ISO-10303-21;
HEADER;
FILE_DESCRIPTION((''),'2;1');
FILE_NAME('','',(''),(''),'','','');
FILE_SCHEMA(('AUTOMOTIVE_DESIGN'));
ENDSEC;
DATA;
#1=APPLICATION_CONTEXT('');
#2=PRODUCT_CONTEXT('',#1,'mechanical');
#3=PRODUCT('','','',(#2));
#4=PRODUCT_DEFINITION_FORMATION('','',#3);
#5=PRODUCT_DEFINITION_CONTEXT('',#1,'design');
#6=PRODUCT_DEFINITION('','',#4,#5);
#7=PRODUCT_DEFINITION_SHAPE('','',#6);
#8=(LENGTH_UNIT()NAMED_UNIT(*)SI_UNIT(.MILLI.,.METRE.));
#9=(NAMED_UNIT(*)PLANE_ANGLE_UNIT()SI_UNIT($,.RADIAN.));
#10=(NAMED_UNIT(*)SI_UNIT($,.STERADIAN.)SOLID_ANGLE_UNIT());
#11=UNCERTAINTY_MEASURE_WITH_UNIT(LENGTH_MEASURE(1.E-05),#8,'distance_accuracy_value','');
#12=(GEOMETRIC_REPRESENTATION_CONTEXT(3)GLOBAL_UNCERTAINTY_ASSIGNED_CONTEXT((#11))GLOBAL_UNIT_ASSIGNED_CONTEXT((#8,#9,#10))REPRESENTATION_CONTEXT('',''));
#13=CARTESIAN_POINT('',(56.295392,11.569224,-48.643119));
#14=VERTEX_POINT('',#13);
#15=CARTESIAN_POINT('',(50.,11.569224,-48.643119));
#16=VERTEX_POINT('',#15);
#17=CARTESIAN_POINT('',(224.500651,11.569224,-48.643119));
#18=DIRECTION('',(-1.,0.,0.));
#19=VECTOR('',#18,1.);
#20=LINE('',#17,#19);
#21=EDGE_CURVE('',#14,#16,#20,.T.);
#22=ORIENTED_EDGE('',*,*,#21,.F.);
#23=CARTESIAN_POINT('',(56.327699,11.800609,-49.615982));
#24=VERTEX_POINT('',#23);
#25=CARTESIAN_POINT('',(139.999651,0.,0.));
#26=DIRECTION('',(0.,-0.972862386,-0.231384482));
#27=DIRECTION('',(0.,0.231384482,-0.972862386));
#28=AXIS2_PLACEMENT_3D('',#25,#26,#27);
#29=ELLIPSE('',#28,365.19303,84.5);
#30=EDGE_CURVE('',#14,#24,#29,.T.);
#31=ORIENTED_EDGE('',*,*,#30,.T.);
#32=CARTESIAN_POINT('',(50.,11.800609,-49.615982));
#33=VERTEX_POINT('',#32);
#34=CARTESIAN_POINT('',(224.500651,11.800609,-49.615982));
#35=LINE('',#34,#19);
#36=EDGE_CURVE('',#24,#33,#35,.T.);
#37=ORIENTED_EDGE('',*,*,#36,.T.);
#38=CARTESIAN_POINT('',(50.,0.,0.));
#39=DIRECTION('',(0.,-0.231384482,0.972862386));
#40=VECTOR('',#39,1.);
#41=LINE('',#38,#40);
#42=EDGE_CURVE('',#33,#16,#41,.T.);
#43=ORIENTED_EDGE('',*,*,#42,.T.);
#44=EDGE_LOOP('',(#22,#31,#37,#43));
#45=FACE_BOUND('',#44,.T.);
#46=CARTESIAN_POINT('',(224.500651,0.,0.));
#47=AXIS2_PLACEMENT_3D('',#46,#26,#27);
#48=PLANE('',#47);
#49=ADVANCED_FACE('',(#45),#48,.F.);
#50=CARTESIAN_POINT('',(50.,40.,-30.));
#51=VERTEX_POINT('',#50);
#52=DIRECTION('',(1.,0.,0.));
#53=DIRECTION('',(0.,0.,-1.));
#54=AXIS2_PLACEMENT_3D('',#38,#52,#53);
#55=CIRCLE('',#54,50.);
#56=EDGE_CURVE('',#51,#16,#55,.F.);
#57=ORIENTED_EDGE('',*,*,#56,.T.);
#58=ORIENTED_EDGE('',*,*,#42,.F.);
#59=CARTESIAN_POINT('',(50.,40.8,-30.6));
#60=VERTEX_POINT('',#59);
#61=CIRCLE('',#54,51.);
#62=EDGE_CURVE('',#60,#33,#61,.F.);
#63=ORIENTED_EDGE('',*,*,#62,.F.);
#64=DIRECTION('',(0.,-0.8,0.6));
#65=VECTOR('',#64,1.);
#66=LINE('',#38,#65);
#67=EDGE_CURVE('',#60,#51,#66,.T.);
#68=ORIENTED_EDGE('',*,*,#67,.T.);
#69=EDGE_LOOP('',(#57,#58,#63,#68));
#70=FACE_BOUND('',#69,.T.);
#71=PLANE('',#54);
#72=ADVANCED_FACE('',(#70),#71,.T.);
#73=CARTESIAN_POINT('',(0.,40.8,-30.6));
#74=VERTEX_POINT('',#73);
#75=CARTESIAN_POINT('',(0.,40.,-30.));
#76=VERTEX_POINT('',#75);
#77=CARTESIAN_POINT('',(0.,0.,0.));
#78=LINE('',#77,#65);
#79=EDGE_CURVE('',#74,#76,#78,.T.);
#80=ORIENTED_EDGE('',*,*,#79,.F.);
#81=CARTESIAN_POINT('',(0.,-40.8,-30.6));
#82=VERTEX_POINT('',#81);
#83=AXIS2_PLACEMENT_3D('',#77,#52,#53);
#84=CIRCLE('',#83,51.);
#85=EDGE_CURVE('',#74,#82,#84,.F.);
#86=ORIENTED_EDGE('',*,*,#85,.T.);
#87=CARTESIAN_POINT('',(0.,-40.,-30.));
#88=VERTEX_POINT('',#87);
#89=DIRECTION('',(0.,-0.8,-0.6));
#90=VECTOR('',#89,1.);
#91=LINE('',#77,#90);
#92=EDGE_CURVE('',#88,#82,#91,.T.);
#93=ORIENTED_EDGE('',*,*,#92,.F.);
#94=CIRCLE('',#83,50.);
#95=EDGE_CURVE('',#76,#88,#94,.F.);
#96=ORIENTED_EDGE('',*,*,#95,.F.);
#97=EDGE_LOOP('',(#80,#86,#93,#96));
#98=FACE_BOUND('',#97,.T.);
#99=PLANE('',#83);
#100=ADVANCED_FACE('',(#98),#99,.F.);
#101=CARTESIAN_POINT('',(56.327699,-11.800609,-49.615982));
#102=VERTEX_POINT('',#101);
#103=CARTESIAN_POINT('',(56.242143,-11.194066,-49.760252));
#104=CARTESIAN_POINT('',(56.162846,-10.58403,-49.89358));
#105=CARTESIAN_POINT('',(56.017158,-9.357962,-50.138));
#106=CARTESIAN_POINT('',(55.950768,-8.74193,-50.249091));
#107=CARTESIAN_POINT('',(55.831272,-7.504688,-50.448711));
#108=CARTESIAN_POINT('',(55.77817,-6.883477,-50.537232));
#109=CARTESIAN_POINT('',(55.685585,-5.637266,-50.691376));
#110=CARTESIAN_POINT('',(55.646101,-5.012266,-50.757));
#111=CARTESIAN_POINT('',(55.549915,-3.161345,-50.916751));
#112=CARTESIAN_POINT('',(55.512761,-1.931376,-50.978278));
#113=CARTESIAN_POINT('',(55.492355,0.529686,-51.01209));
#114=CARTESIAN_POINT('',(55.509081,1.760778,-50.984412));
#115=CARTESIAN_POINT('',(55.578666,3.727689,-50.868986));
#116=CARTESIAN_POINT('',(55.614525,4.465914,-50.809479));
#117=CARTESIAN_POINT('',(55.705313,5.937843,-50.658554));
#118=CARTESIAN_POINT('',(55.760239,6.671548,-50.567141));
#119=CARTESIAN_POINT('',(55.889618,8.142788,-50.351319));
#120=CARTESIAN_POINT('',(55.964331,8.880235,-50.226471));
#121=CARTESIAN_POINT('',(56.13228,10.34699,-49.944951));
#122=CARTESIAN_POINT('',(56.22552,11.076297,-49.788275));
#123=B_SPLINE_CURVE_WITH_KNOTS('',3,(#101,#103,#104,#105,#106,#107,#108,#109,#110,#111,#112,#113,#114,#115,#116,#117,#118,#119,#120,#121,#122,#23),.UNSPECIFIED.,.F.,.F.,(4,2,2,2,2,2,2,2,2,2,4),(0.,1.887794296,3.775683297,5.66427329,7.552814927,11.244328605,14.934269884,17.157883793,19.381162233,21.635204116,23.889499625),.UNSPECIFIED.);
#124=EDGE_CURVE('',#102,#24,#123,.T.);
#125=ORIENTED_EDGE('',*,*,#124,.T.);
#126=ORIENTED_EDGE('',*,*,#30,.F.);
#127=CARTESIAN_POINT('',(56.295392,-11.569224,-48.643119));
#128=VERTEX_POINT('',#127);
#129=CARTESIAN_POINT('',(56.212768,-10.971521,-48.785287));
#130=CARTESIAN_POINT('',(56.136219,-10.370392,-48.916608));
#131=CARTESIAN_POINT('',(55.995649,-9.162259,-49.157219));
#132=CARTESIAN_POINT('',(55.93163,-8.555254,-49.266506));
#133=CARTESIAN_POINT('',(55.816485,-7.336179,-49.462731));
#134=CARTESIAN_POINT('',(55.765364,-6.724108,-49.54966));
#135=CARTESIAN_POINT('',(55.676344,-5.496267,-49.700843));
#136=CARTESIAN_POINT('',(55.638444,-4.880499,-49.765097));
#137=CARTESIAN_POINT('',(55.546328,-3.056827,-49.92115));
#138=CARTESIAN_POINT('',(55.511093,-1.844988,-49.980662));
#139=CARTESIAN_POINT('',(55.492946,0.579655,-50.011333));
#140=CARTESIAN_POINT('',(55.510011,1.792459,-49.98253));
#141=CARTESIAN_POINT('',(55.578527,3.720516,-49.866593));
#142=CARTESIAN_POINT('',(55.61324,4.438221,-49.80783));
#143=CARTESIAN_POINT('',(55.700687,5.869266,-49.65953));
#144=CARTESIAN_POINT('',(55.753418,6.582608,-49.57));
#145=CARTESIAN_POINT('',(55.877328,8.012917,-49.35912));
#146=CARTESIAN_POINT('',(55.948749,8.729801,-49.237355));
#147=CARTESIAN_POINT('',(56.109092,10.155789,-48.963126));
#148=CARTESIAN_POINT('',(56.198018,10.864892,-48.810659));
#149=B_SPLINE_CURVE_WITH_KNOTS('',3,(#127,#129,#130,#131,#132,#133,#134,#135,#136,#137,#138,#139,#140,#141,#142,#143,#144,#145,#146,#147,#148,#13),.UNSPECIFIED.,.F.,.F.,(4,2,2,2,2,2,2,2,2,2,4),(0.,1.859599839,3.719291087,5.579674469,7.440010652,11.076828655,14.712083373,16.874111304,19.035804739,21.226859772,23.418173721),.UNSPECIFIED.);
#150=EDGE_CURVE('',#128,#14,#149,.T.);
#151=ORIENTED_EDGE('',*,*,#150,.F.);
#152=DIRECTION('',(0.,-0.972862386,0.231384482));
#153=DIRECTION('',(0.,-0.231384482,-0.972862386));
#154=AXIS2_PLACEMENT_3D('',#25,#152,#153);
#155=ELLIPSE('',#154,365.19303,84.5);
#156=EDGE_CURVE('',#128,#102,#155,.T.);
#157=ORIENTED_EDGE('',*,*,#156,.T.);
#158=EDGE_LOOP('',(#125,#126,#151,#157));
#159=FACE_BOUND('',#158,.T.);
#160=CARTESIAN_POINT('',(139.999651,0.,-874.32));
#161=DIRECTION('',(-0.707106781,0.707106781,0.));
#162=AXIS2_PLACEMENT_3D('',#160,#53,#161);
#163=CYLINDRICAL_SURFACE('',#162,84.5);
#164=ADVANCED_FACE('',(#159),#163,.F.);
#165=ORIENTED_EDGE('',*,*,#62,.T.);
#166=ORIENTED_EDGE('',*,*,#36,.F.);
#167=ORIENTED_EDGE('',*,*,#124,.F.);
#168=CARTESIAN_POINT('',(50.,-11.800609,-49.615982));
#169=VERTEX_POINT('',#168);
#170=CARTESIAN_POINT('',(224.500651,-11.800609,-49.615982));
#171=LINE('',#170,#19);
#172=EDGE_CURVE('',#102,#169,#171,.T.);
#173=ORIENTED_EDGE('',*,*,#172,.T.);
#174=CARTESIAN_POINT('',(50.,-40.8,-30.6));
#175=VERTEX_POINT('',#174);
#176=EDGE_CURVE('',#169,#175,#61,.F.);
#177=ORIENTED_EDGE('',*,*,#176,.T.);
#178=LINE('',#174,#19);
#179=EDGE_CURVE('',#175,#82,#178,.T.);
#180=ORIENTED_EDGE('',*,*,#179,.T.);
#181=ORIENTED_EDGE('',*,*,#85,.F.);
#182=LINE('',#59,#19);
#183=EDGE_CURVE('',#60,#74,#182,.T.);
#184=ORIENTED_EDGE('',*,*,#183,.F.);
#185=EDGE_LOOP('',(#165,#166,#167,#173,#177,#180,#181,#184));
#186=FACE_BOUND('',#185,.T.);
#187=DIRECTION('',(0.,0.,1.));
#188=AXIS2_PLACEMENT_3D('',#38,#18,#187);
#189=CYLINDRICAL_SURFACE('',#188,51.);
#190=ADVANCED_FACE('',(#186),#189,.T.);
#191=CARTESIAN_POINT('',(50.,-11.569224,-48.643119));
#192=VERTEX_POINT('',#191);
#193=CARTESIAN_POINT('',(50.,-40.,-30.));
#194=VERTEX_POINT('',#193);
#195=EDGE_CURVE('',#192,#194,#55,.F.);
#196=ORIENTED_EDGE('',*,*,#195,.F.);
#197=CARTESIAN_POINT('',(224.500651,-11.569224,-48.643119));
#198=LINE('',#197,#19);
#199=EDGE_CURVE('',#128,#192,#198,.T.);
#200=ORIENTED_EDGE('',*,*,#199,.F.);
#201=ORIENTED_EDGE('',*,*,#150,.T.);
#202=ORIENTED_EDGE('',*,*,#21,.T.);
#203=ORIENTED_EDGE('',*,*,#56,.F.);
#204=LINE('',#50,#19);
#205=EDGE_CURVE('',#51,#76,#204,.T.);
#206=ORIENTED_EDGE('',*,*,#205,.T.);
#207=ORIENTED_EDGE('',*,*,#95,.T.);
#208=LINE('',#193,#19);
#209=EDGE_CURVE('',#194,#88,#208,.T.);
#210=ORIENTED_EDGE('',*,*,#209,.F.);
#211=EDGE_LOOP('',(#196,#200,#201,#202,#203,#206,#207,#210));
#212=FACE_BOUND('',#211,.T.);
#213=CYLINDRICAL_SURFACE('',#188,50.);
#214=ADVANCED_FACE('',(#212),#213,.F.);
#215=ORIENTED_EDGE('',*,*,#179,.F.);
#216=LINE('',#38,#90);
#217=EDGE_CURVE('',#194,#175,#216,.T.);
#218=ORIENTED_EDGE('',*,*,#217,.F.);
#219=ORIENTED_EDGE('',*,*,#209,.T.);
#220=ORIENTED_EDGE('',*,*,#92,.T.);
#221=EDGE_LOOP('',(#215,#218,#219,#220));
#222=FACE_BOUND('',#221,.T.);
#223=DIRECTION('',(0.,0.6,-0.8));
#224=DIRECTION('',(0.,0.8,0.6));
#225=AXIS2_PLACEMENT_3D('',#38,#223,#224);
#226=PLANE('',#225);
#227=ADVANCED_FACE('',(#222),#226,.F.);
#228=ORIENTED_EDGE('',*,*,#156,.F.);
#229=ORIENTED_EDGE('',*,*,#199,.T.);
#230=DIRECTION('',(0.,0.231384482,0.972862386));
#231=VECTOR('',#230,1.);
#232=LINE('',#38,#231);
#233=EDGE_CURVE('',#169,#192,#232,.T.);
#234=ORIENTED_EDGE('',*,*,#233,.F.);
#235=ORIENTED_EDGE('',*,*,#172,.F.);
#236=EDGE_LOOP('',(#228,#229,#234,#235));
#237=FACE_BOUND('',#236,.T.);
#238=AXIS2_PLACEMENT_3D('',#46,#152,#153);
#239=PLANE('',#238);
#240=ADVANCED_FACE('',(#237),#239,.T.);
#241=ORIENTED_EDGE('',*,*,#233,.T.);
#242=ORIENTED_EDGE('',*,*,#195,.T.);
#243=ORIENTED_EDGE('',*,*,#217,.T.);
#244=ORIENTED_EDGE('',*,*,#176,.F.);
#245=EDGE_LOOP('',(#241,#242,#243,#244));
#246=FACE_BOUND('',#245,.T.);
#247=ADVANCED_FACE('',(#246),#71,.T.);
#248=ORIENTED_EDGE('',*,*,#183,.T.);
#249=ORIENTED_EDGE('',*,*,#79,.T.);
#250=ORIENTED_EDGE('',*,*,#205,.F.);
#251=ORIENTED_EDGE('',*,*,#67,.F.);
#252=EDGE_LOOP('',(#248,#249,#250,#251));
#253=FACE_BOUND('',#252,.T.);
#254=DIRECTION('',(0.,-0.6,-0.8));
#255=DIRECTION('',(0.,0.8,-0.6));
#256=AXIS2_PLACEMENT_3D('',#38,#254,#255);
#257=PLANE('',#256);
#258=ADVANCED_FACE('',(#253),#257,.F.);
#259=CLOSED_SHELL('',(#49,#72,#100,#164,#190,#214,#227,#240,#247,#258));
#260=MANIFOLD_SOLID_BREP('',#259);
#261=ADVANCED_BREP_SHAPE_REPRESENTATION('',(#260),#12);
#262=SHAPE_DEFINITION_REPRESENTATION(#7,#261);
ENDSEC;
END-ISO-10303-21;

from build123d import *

# Parameters (mm, degrees)
BOSS_EXTRUDE1_DEPTH   = 50
BOSS_EXTRUDE1_2_DEPTH = 50
BOSS_EXTRUDE2_DEPTH   = 55.499654918
BOSS_EXTRUDE2_START   = 55.499654918
BOSS_EXTRUDE2_2_DEPTH = 0.828043858
BOSS_EXTRUDE2_START_2 = -52
BOSS_EXTRUDE2_3_DEPTH = 4


with BuildPart() as part:
    # airflap → Boss-Extrude1 (new body)
    with BuildSketch(Plane(origin=(0, 0, 0), x_dir=(0, 0, -1), z_dir=(1, 0, 0))):
        with BuildLine():
            ThreePointArc((49.615981669, 11.800608587), (42.648471302, 27.966192012), (30.6, 40.8))
            Line((30.6, 40.8), (30, 40))
            ThreePointArc((30, 40), (41.812226766, 27.417835306), (48.643119283, 11.569224105))
            Line((48.643119283, 11.569224105), (49.615981669, 11.800608587))
        make_face()
    extrude(amount=BOSS_EXTRUDE1_DEPTH)



with BuildPart() as body_2:
    # airflap → Boss-Extrude1 2 (new body)
    with BuildSketch(Plane(origin=(0, 0, 0), x_dir=(0, 0, -1), z_dir=(1, 0, 0))):
        with BuildLine():
            ThreePointArc((30.6, -40.8), (42.648471302, -27.966192012), (49.615981669, -11.800608587))
            Line((49.615981669, -11.800608587), (48.643119283, -11.569224105))
            ThreePointArc((48.643119283, -11.569224105), (41.812226766, -27.417835306), (30, -40))
            Line((30, -40), (30.6, -40.8))
        make_face()
    extrude(amount=BOSS_EXTRUDE1_2_DEPTH)


with BuildPart() as part_1:
    add(part.part)

    add(body_2.part)  # Boss-Extrude2 merges body 2
    # Boss-Extrude2: read off the stored shape, not the designer's step
    # Boss-Extrude2 outline → Boss-Extrude2 (add)
    with BuildSketch(Plane(origin=(0, 0, 0), x_dir=(0, 0, -1), z_dir=(1, 0, 0))):
        with BuildLine():
            ThreePointArc((49.615981669, -11.800608587), (51, 0), (49.615981669, 11.800608587))
            Line((49.615981669, 11.800608587), (48.643119283, 11.569224105))
            ThreePointArc((48.643119283, 11.569224105), (50, 0), (48.643119283, -11.569224105))
            Line((48.643119283, -11.569224105), (49.615981669, -11.800608587))
        make_face()
    extrude(amount=BOSS_EXTRUDE2_DEPTH)

    # Boss-Extrude2 2 outline → Boss-Extrude2 2 (add)
    with BuildSketch(Plane.YZ.offset(BOSS_EXTRUDE2_START)):
        with BuildLine():
            Line((11.800608587, -49.615981669), (11.569224105, -48.643119283))
            ThreePointArc((11.569224105, -48.643119283), (0, -50), (-11.569224105, -48.643119283))
            Line((-11.569224105, -48.643119283), (-11.800608587, -49.615981669))
            ThreePointArc((-11.800608587, -49.615981669), (0, -51), (11.800608587, -49.615981669))
        make_face()
    extrude(amount=BOSS_EXTRUDE2_2_DEPTH)

    # Boss-Extrude2 3 outline → Boss-Extrude2 3 (cut)
    with BuildSketch(Plane.XY.offset(BOSS_EXTRUDE2_START_2)):
        with BuildLine():
            ThreePointArc((56.327698776, 11.800608587), (55.499651286, 0), (56.327698776, -11.800608587))
            Line((56.327698776, -11.800608587), (56.327698776, 11.800608587))
        make_face()
    extrude(amount=BOSS_EXTRUDE2_3_DEPTH, mode=Mode.SUBTRACT)


solid = part_1.part
